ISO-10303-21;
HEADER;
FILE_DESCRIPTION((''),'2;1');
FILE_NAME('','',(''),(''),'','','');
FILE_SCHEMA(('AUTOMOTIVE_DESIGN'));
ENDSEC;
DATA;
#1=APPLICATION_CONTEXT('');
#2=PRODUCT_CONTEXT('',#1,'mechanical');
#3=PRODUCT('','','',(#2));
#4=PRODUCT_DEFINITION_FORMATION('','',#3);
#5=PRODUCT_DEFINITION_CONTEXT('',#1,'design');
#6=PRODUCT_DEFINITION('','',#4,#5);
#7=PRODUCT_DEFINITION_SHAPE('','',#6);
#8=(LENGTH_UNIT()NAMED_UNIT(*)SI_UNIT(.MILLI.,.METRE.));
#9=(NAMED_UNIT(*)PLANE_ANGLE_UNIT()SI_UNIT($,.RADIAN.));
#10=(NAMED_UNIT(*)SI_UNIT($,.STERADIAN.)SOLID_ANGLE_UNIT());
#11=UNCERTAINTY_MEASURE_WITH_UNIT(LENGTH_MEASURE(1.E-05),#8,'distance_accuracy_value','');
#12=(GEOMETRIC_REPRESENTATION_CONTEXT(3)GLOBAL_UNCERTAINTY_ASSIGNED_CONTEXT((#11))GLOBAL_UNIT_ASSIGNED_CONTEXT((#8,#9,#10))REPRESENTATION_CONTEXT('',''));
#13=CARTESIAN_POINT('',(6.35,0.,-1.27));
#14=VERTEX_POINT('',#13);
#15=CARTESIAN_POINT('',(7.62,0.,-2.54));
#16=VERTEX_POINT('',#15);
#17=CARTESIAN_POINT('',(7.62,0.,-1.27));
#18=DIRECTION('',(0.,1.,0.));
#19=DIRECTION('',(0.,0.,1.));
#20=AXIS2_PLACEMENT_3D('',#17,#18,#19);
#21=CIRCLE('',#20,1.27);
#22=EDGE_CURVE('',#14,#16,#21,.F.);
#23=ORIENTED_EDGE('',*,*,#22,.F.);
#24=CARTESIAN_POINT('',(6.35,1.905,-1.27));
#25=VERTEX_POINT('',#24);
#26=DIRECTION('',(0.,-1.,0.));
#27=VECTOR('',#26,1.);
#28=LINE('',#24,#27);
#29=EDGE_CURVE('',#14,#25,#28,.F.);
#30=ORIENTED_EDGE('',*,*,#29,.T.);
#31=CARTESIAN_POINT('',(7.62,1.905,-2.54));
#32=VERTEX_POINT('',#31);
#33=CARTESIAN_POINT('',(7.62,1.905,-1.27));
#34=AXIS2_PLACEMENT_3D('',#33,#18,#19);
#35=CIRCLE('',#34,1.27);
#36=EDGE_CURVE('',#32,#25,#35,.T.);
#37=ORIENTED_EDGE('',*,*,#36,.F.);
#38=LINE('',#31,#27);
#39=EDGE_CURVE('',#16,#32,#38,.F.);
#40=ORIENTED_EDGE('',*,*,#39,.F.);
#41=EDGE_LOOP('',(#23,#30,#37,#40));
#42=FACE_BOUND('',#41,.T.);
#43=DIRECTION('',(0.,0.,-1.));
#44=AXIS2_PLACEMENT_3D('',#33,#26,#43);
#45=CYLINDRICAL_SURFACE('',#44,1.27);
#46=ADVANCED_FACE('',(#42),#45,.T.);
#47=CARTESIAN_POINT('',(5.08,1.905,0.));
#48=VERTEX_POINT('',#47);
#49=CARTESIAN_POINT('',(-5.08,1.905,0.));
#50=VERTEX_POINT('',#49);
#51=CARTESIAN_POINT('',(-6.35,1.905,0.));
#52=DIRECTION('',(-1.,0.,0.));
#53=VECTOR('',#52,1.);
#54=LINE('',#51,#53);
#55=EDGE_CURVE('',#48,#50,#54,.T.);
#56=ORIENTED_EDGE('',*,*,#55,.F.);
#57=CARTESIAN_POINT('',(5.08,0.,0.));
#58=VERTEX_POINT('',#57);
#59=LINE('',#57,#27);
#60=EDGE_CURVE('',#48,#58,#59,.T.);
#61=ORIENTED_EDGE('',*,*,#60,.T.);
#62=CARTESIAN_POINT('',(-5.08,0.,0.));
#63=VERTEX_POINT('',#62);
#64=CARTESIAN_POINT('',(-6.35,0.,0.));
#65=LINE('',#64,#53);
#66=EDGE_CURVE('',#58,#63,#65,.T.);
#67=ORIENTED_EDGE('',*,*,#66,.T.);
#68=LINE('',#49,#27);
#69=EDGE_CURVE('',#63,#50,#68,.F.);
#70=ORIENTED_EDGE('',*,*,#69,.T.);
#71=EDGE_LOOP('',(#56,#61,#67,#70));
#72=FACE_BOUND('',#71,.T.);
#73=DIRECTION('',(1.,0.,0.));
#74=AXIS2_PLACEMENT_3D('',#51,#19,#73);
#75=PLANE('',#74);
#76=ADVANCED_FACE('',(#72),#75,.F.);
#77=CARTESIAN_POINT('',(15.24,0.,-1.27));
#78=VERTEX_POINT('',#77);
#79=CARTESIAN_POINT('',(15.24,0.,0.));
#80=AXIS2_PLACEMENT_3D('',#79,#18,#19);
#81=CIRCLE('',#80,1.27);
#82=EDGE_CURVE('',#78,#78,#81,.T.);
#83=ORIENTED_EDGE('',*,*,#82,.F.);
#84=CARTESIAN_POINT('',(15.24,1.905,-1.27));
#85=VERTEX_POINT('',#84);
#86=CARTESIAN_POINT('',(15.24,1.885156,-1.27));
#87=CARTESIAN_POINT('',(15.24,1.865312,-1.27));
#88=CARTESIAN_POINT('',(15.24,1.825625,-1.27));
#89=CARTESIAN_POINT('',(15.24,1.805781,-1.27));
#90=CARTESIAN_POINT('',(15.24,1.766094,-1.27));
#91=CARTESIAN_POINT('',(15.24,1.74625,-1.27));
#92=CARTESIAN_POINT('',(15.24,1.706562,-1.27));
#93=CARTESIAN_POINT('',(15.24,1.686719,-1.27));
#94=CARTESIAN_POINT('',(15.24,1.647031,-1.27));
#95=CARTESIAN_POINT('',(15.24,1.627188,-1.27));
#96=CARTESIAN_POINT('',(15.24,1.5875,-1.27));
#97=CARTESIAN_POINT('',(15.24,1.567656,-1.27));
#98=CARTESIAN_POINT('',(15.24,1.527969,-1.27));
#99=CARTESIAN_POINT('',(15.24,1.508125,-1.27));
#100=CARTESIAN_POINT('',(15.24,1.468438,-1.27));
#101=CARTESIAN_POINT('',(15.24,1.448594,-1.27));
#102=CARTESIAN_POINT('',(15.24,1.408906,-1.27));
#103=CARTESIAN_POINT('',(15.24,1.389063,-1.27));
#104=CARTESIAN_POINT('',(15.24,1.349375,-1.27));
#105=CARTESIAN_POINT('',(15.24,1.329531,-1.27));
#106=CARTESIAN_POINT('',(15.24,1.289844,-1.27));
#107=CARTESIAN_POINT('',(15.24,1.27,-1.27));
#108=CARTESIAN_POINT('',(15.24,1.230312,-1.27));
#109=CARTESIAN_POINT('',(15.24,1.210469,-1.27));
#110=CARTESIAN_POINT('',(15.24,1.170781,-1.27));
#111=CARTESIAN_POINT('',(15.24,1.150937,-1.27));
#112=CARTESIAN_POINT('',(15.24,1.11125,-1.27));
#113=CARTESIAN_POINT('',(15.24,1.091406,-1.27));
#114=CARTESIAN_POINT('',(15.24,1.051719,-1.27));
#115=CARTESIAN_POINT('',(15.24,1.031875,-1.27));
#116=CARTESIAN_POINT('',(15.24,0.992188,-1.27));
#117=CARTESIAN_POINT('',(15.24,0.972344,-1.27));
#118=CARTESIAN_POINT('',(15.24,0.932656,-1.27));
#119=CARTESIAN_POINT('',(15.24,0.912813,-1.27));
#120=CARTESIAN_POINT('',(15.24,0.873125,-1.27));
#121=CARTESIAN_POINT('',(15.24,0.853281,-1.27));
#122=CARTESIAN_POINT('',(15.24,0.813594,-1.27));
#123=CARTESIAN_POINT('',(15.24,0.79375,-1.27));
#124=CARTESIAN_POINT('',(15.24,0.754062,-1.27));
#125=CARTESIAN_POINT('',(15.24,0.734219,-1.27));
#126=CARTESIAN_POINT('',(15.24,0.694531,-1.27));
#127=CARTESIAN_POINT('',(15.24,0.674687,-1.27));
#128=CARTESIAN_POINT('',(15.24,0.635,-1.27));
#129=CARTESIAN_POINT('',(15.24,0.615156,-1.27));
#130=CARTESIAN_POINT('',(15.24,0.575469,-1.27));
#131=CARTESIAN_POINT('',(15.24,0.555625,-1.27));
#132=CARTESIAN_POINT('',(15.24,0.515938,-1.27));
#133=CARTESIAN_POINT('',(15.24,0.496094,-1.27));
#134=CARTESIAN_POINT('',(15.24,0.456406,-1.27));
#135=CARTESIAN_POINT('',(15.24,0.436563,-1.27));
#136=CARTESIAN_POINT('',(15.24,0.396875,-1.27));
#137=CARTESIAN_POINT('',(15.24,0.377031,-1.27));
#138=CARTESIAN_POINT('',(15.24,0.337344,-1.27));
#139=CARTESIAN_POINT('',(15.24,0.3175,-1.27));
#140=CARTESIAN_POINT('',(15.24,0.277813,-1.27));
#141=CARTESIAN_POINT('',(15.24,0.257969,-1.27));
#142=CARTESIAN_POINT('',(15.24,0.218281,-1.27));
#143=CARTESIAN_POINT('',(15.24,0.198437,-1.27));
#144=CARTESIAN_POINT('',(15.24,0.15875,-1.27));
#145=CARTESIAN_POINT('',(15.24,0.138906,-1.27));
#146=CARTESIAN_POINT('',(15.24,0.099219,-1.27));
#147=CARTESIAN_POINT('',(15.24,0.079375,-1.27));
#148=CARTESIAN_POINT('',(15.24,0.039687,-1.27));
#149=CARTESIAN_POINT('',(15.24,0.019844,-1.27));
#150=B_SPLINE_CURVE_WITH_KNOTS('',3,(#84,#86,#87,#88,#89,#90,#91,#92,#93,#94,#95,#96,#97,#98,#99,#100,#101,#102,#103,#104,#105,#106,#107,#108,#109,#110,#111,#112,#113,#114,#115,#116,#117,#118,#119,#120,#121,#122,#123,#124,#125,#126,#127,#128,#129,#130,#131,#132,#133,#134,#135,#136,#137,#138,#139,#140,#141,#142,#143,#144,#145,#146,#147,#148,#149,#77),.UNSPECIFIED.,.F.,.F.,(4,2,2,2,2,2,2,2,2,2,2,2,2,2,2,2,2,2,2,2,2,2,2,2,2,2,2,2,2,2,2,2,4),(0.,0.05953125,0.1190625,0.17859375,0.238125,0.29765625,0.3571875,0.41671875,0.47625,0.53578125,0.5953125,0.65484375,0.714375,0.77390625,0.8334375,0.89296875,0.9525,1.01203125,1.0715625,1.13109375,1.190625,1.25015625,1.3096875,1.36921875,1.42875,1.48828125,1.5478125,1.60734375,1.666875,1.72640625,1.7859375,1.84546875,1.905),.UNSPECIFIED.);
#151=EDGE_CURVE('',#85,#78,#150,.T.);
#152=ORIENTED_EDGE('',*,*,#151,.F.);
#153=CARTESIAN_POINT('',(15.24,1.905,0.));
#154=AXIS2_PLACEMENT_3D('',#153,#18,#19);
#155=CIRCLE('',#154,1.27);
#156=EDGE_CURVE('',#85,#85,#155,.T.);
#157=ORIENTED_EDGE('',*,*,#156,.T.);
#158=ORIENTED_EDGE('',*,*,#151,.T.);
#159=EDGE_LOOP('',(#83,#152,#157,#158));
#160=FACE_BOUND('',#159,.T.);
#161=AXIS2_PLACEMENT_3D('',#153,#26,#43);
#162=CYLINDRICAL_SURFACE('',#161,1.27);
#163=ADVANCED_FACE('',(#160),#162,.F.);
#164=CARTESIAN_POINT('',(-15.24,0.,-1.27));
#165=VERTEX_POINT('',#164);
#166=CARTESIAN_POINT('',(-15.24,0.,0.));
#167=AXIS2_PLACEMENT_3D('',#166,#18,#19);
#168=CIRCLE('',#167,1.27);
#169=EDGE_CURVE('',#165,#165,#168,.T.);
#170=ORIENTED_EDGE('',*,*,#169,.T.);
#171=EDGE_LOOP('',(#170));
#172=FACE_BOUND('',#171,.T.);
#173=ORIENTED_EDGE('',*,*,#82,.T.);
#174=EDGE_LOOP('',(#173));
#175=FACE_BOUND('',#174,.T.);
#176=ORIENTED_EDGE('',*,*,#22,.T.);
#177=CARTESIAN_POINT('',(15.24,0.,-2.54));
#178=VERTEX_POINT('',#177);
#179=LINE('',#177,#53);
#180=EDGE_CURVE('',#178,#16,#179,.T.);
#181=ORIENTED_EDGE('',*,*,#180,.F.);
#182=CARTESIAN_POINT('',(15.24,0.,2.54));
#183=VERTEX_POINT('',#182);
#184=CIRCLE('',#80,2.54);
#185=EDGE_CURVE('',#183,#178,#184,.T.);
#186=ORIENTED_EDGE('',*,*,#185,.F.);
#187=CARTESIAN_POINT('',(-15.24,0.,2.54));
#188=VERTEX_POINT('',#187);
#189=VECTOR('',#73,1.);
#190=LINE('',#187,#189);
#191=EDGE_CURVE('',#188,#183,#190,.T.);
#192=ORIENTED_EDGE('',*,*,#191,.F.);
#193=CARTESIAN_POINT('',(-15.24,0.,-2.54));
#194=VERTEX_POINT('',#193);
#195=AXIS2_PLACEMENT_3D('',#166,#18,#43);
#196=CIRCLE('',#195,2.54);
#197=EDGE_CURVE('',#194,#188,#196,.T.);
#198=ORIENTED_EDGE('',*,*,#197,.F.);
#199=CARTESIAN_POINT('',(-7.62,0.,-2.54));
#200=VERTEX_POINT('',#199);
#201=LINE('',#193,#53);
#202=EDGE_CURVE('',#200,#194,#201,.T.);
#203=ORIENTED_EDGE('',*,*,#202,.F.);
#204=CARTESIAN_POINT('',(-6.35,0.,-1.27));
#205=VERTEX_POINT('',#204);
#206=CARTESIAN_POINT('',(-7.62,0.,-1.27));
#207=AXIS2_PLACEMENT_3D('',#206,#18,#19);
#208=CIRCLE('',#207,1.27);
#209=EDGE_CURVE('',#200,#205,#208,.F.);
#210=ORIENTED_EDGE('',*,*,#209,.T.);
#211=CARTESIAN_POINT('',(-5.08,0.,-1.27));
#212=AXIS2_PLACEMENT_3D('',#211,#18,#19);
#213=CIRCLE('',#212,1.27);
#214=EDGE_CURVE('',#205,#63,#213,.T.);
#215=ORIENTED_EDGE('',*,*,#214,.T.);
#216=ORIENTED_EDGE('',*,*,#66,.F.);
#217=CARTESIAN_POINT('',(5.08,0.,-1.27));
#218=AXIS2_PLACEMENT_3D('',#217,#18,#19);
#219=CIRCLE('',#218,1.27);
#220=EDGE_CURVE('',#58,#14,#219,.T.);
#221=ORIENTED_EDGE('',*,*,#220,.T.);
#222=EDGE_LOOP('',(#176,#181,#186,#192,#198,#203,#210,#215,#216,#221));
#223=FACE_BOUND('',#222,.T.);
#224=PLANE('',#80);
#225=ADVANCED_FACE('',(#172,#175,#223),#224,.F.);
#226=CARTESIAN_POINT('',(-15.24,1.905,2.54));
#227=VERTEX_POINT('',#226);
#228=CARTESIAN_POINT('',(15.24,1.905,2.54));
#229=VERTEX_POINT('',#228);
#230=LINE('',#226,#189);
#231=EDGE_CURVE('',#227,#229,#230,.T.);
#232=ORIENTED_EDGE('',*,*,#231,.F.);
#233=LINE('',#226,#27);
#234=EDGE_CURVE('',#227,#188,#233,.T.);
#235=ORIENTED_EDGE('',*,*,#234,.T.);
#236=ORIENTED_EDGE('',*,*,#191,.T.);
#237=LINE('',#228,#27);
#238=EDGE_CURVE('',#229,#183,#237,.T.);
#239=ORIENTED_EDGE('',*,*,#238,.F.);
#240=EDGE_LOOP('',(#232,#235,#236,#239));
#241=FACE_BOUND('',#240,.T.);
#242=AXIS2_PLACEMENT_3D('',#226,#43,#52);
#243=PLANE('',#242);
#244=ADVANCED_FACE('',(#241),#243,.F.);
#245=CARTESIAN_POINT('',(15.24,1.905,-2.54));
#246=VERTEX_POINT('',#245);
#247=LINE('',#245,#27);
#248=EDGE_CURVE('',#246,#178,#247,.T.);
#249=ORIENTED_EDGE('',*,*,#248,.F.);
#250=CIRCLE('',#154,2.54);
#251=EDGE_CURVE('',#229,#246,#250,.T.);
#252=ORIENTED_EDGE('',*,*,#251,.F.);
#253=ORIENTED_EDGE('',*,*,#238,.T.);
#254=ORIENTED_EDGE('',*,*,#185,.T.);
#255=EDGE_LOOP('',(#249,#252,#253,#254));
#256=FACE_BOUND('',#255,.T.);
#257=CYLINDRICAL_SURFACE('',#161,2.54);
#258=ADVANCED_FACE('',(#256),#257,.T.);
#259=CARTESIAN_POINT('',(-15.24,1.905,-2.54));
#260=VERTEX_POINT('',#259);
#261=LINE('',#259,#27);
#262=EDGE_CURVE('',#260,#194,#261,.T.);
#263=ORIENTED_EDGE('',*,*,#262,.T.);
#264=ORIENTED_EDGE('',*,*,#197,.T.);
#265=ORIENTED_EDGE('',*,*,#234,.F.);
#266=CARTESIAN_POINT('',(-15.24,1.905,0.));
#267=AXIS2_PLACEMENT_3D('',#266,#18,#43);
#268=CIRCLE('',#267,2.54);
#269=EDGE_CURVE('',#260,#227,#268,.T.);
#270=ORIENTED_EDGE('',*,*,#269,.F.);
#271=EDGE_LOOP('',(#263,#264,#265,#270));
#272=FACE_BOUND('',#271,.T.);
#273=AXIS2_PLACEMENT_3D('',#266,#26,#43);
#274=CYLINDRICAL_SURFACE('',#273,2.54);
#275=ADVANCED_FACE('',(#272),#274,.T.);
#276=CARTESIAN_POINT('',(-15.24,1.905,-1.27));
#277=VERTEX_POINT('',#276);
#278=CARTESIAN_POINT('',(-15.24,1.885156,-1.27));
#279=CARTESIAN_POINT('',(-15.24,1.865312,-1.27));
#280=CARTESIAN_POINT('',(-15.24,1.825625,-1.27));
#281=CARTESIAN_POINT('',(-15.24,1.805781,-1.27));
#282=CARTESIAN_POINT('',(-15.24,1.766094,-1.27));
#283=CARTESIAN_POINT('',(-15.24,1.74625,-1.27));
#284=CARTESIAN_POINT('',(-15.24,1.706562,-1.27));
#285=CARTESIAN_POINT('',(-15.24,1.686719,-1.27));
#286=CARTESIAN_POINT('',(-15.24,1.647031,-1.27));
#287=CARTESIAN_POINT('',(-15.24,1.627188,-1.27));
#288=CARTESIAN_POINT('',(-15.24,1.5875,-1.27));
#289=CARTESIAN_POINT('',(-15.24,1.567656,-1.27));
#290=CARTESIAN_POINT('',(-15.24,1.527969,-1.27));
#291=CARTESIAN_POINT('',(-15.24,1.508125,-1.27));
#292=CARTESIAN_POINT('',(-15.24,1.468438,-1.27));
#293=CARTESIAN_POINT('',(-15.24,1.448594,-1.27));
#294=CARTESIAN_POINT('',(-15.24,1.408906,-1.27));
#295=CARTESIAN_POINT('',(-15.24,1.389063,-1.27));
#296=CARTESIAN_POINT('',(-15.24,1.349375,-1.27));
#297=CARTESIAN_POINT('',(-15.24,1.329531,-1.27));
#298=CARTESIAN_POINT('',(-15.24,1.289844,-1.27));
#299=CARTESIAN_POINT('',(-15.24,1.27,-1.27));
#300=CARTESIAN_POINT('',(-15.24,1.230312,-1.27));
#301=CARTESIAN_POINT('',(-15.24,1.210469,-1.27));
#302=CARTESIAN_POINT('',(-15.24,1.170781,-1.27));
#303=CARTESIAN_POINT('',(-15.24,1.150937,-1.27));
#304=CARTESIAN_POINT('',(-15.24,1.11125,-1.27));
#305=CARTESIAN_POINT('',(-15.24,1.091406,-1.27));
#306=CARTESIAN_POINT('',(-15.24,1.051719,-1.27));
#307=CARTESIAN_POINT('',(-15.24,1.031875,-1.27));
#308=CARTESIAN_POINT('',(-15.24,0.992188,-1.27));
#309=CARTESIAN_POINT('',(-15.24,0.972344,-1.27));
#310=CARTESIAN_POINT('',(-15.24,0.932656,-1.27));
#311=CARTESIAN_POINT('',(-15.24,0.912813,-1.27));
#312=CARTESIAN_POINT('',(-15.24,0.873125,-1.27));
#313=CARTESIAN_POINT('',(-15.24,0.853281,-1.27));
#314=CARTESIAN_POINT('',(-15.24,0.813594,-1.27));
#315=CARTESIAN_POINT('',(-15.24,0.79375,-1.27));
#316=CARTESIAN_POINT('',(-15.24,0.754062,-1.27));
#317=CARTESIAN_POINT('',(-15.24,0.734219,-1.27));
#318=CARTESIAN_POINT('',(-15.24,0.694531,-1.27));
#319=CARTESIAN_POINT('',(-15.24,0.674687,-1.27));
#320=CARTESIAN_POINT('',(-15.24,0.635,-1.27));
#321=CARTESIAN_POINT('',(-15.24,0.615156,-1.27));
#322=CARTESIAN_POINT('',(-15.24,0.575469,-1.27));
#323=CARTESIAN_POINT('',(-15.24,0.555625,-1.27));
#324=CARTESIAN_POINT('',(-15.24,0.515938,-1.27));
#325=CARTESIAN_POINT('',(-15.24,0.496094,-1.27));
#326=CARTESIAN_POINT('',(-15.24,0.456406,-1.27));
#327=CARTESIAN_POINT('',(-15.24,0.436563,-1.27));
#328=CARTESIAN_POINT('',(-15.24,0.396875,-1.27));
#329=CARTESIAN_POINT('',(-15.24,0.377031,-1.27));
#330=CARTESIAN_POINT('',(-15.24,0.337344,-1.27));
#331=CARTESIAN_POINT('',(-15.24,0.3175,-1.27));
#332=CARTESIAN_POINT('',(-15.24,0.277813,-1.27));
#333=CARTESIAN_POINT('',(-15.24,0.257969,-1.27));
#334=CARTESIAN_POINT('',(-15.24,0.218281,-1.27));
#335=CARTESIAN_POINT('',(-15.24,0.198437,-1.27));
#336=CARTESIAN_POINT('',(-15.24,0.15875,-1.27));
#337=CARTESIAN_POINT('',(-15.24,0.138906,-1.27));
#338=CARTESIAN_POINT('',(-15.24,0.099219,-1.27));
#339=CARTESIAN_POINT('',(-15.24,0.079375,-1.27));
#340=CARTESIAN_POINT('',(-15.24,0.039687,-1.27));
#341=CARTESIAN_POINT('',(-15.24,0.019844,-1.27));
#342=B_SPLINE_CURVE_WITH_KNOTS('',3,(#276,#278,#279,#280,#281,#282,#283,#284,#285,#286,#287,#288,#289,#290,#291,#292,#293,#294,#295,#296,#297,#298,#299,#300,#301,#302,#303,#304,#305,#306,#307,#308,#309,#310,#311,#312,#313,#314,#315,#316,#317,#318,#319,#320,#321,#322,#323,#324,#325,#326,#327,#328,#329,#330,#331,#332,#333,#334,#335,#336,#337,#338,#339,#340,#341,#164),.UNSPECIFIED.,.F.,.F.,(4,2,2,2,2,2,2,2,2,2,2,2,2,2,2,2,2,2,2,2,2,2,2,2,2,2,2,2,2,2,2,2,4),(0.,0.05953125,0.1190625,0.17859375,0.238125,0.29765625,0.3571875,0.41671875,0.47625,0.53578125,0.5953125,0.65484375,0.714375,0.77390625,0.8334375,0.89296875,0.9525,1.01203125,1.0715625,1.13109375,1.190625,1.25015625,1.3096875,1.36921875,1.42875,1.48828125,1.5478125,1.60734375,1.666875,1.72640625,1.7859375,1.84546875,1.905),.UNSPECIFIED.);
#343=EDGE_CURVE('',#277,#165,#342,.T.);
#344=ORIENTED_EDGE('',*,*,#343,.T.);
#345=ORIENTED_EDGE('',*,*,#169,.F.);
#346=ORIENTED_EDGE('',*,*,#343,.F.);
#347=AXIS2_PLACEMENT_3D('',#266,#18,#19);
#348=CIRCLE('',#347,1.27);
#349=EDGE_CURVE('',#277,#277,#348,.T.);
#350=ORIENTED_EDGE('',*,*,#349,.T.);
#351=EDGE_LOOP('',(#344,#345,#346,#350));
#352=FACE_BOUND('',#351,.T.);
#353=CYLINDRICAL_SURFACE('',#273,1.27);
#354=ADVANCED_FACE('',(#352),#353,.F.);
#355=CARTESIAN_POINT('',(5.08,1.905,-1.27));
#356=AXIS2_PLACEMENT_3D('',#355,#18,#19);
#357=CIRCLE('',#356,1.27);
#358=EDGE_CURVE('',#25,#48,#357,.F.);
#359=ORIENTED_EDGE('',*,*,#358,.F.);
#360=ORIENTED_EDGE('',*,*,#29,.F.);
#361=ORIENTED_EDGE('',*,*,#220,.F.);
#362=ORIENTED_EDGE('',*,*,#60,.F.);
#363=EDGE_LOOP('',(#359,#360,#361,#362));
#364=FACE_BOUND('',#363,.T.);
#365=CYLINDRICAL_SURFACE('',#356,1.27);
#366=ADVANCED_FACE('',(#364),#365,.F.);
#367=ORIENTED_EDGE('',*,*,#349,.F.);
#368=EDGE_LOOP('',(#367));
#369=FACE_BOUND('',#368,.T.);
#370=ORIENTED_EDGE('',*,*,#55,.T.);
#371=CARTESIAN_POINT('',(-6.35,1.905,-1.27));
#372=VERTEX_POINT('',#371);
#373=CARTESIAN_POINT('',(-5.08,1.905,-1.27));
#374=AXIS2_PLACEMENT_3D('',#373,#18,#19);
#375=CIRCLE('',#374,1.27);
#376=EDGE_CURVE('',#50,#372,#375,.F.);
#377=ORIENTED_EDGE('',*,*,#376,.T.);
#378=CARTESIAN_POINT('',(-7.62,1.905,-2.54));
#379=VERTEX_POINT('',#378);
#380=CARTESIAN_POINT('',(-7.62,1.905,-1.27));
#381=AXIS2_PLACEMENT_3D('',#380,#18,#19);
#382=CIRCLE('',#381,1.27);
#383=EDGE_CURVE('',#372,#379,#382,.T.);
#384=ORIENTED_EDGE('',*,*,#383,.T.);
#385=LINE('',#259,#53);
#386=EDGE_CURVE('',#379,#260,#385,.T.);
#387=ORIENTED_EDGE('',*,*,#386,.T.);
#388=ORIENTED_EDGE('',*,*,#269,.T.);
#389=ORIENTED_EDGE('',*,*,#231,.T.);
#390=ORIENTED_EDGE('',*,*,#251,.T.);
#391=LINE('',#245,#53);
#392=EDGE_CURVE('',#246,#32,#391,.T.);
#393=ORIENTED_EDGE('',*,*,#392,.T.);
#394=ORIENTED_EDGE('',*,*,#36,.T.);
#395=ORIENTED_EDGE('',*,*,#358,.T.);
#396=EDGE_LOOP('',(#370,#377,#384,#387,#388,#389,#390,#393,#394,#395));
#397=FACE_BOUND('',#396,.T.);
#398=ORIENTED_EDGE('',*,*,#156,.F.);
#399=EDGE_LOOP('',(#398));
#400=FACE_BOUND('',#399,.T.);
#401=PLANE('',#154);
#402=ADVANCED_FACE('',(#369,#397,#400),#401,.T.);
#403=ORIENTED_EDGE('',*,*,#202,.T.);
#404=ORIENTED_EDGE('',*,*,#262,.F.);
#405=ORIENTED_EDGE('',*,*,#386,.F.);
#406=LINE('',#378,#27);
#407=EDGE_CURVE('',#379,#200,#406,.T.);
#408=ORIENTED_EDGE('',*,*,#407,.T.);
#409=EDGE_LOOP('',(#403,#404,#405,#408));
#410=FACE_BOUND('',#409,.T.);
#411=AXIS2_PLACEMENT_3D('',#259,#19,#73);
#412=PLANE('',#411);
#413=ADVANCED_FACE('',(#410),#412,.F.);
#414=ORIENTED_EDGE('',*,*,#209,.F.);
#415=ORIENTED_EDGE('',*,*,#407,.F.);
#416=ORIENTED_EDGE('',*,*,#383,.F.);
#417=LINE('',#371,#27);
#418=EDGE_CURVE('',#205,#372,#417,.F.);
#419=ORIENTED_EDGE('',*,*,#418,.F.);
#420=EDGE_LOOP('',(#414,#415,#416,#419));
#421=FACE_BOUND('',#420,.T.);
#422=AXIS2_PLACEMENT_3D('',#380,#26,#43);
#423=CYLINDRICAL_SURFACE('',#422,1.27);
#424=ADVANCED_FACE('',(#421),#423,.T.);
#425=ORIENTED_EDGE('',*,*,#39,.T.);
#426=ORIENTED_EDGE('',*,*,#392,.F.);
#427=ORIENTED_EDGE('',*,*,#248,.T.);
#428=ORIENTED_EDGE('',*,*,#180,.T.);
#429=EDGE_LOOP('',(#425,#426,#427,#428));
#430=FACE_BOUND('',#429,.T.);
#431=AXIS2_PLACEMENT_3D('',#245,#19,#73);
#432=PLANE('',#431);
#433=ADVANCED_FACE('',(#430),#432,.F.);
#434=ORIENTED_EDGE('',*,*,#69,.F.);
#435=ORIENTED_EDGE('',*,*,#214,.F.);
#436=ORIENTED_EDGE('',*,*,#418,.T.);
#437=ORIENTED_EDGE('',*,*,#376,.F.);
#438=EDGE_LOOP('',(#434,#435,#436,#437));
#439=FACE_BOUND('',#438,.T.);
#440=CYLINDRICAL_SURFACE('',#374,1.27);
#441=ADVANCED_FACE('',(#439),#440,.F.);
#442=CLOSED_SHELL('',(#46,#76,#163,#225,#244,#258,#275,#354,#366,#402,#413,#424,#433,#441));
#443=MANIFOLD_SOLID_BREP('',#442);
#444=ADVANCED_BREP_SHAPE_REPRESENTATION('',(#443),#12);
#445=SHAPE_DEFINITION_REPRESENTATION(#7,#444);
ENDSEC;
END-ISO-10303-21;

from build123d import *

# Parameters (mm, degrees)
SKETCH1_R           = 1.27
BOSS_EXTRUDE1_DEPTH = 1.905
FILLET1_START       = -1
FILLET1_DEPTH       = 4
FILLET1_2_DEPTH     = 1.905


with BuildPart() as part:
    # Sketch1 → Boss-Extrude1 (new body)
    with BuildSketch(Plane(origin=(0, 0, 0), x_dir=(1, 0, 0), z_dir=(0, 1, 0))):
        with BuildLine():
            Line((6.35, 2.54), (6.35, 0))
            Line((6.35, 0), (-6.35, 0))
            Line((-6.35, 0), (-6.35, 2.54))
            Line((-6.35, 2.54), (-15.24, 2.54))
            ThreePointArc((-15.24, 2.54), (-17.78, 0), (-15.24, -2.54))
            Line((-15.24, -2.54), (15.24, -2.54))
            ThreePointArc((15.24, -2.54), (17.78, 0), (15.24, 2.54))
            Line((15.24, 2.54), (6.35, 2.54))
        make_face()
        with Locations(Location((-15.24, 0, 0), (0, 0, 90))):
            Circle(SKETCH1_R, mode=Mode.SUBTRACT)
        with Locations(Location((15.24, 0, 0), (0, 0, 90))):
            Circle(SKETCH1_R, mode=Mode.SUBTRACT)
    extrude(amount=BOSS_EXTRUDE1_DEPTH)

    # Fillet1: read off the stored shape, not the designer's step
    # Fillet1 outline → Fillet1 (cut)
    with BuildSketch(Plane(origin=(0, 0, 0), x_dir=(1, 0, 0), z_dir=(0, 1, 0)).offset(FILLET1_START)):
        with BuildLine():
            Line((6.35, 2.54), (6.35, 1.27))
            ThreePointArc((6.35, 1.27), (6.721974388, 2.168025612), (7.62, 2.54))
            Line((7.62, 2.54), (6.35, 2.54))
        make_face()
        with BuildLine():
            ThreePointArc((-7.62, 2.54), (-6.721974388, 2.168025612), (-6.35, 1.27))
            Line((-6.35, 1.27), (-6.35, 2.54))
            Line((-6.35, 2.54), (-7.62, 2.54))
        make_face()
    extrude(amount=FILLET1_DEPTH, mode=Mode.SUBTRACT)

    # Fillet1 2 outline → Fillet1 2 (add)
    with BuildSketch(Plane(origin=(0, 0, 0), x_dir=(1, 0, 0), z_dir=(0, 1, 0))):
        with BuildLine():
            Line((-6.35, 0), (-5.08, 0))
            ThreePointArc((-5.08, 0), (-5.978025612, 0.371974388), (-6.35, 1.27))
            Line((-6.35, 1.27), (-6.35, 0))
        make_face()
        with BuildLine():
            ThreePointArc((6.35, 1.27), (5.978025612, 0.371974388), (5.08, 0))
            Line((5.08, 0), (6.35, 0))
            Line((6.35, 0), (6.35, 1.27))
        make_face()
    extrude(amount=FILLET1_2_DEPTH)


solid = part.part
